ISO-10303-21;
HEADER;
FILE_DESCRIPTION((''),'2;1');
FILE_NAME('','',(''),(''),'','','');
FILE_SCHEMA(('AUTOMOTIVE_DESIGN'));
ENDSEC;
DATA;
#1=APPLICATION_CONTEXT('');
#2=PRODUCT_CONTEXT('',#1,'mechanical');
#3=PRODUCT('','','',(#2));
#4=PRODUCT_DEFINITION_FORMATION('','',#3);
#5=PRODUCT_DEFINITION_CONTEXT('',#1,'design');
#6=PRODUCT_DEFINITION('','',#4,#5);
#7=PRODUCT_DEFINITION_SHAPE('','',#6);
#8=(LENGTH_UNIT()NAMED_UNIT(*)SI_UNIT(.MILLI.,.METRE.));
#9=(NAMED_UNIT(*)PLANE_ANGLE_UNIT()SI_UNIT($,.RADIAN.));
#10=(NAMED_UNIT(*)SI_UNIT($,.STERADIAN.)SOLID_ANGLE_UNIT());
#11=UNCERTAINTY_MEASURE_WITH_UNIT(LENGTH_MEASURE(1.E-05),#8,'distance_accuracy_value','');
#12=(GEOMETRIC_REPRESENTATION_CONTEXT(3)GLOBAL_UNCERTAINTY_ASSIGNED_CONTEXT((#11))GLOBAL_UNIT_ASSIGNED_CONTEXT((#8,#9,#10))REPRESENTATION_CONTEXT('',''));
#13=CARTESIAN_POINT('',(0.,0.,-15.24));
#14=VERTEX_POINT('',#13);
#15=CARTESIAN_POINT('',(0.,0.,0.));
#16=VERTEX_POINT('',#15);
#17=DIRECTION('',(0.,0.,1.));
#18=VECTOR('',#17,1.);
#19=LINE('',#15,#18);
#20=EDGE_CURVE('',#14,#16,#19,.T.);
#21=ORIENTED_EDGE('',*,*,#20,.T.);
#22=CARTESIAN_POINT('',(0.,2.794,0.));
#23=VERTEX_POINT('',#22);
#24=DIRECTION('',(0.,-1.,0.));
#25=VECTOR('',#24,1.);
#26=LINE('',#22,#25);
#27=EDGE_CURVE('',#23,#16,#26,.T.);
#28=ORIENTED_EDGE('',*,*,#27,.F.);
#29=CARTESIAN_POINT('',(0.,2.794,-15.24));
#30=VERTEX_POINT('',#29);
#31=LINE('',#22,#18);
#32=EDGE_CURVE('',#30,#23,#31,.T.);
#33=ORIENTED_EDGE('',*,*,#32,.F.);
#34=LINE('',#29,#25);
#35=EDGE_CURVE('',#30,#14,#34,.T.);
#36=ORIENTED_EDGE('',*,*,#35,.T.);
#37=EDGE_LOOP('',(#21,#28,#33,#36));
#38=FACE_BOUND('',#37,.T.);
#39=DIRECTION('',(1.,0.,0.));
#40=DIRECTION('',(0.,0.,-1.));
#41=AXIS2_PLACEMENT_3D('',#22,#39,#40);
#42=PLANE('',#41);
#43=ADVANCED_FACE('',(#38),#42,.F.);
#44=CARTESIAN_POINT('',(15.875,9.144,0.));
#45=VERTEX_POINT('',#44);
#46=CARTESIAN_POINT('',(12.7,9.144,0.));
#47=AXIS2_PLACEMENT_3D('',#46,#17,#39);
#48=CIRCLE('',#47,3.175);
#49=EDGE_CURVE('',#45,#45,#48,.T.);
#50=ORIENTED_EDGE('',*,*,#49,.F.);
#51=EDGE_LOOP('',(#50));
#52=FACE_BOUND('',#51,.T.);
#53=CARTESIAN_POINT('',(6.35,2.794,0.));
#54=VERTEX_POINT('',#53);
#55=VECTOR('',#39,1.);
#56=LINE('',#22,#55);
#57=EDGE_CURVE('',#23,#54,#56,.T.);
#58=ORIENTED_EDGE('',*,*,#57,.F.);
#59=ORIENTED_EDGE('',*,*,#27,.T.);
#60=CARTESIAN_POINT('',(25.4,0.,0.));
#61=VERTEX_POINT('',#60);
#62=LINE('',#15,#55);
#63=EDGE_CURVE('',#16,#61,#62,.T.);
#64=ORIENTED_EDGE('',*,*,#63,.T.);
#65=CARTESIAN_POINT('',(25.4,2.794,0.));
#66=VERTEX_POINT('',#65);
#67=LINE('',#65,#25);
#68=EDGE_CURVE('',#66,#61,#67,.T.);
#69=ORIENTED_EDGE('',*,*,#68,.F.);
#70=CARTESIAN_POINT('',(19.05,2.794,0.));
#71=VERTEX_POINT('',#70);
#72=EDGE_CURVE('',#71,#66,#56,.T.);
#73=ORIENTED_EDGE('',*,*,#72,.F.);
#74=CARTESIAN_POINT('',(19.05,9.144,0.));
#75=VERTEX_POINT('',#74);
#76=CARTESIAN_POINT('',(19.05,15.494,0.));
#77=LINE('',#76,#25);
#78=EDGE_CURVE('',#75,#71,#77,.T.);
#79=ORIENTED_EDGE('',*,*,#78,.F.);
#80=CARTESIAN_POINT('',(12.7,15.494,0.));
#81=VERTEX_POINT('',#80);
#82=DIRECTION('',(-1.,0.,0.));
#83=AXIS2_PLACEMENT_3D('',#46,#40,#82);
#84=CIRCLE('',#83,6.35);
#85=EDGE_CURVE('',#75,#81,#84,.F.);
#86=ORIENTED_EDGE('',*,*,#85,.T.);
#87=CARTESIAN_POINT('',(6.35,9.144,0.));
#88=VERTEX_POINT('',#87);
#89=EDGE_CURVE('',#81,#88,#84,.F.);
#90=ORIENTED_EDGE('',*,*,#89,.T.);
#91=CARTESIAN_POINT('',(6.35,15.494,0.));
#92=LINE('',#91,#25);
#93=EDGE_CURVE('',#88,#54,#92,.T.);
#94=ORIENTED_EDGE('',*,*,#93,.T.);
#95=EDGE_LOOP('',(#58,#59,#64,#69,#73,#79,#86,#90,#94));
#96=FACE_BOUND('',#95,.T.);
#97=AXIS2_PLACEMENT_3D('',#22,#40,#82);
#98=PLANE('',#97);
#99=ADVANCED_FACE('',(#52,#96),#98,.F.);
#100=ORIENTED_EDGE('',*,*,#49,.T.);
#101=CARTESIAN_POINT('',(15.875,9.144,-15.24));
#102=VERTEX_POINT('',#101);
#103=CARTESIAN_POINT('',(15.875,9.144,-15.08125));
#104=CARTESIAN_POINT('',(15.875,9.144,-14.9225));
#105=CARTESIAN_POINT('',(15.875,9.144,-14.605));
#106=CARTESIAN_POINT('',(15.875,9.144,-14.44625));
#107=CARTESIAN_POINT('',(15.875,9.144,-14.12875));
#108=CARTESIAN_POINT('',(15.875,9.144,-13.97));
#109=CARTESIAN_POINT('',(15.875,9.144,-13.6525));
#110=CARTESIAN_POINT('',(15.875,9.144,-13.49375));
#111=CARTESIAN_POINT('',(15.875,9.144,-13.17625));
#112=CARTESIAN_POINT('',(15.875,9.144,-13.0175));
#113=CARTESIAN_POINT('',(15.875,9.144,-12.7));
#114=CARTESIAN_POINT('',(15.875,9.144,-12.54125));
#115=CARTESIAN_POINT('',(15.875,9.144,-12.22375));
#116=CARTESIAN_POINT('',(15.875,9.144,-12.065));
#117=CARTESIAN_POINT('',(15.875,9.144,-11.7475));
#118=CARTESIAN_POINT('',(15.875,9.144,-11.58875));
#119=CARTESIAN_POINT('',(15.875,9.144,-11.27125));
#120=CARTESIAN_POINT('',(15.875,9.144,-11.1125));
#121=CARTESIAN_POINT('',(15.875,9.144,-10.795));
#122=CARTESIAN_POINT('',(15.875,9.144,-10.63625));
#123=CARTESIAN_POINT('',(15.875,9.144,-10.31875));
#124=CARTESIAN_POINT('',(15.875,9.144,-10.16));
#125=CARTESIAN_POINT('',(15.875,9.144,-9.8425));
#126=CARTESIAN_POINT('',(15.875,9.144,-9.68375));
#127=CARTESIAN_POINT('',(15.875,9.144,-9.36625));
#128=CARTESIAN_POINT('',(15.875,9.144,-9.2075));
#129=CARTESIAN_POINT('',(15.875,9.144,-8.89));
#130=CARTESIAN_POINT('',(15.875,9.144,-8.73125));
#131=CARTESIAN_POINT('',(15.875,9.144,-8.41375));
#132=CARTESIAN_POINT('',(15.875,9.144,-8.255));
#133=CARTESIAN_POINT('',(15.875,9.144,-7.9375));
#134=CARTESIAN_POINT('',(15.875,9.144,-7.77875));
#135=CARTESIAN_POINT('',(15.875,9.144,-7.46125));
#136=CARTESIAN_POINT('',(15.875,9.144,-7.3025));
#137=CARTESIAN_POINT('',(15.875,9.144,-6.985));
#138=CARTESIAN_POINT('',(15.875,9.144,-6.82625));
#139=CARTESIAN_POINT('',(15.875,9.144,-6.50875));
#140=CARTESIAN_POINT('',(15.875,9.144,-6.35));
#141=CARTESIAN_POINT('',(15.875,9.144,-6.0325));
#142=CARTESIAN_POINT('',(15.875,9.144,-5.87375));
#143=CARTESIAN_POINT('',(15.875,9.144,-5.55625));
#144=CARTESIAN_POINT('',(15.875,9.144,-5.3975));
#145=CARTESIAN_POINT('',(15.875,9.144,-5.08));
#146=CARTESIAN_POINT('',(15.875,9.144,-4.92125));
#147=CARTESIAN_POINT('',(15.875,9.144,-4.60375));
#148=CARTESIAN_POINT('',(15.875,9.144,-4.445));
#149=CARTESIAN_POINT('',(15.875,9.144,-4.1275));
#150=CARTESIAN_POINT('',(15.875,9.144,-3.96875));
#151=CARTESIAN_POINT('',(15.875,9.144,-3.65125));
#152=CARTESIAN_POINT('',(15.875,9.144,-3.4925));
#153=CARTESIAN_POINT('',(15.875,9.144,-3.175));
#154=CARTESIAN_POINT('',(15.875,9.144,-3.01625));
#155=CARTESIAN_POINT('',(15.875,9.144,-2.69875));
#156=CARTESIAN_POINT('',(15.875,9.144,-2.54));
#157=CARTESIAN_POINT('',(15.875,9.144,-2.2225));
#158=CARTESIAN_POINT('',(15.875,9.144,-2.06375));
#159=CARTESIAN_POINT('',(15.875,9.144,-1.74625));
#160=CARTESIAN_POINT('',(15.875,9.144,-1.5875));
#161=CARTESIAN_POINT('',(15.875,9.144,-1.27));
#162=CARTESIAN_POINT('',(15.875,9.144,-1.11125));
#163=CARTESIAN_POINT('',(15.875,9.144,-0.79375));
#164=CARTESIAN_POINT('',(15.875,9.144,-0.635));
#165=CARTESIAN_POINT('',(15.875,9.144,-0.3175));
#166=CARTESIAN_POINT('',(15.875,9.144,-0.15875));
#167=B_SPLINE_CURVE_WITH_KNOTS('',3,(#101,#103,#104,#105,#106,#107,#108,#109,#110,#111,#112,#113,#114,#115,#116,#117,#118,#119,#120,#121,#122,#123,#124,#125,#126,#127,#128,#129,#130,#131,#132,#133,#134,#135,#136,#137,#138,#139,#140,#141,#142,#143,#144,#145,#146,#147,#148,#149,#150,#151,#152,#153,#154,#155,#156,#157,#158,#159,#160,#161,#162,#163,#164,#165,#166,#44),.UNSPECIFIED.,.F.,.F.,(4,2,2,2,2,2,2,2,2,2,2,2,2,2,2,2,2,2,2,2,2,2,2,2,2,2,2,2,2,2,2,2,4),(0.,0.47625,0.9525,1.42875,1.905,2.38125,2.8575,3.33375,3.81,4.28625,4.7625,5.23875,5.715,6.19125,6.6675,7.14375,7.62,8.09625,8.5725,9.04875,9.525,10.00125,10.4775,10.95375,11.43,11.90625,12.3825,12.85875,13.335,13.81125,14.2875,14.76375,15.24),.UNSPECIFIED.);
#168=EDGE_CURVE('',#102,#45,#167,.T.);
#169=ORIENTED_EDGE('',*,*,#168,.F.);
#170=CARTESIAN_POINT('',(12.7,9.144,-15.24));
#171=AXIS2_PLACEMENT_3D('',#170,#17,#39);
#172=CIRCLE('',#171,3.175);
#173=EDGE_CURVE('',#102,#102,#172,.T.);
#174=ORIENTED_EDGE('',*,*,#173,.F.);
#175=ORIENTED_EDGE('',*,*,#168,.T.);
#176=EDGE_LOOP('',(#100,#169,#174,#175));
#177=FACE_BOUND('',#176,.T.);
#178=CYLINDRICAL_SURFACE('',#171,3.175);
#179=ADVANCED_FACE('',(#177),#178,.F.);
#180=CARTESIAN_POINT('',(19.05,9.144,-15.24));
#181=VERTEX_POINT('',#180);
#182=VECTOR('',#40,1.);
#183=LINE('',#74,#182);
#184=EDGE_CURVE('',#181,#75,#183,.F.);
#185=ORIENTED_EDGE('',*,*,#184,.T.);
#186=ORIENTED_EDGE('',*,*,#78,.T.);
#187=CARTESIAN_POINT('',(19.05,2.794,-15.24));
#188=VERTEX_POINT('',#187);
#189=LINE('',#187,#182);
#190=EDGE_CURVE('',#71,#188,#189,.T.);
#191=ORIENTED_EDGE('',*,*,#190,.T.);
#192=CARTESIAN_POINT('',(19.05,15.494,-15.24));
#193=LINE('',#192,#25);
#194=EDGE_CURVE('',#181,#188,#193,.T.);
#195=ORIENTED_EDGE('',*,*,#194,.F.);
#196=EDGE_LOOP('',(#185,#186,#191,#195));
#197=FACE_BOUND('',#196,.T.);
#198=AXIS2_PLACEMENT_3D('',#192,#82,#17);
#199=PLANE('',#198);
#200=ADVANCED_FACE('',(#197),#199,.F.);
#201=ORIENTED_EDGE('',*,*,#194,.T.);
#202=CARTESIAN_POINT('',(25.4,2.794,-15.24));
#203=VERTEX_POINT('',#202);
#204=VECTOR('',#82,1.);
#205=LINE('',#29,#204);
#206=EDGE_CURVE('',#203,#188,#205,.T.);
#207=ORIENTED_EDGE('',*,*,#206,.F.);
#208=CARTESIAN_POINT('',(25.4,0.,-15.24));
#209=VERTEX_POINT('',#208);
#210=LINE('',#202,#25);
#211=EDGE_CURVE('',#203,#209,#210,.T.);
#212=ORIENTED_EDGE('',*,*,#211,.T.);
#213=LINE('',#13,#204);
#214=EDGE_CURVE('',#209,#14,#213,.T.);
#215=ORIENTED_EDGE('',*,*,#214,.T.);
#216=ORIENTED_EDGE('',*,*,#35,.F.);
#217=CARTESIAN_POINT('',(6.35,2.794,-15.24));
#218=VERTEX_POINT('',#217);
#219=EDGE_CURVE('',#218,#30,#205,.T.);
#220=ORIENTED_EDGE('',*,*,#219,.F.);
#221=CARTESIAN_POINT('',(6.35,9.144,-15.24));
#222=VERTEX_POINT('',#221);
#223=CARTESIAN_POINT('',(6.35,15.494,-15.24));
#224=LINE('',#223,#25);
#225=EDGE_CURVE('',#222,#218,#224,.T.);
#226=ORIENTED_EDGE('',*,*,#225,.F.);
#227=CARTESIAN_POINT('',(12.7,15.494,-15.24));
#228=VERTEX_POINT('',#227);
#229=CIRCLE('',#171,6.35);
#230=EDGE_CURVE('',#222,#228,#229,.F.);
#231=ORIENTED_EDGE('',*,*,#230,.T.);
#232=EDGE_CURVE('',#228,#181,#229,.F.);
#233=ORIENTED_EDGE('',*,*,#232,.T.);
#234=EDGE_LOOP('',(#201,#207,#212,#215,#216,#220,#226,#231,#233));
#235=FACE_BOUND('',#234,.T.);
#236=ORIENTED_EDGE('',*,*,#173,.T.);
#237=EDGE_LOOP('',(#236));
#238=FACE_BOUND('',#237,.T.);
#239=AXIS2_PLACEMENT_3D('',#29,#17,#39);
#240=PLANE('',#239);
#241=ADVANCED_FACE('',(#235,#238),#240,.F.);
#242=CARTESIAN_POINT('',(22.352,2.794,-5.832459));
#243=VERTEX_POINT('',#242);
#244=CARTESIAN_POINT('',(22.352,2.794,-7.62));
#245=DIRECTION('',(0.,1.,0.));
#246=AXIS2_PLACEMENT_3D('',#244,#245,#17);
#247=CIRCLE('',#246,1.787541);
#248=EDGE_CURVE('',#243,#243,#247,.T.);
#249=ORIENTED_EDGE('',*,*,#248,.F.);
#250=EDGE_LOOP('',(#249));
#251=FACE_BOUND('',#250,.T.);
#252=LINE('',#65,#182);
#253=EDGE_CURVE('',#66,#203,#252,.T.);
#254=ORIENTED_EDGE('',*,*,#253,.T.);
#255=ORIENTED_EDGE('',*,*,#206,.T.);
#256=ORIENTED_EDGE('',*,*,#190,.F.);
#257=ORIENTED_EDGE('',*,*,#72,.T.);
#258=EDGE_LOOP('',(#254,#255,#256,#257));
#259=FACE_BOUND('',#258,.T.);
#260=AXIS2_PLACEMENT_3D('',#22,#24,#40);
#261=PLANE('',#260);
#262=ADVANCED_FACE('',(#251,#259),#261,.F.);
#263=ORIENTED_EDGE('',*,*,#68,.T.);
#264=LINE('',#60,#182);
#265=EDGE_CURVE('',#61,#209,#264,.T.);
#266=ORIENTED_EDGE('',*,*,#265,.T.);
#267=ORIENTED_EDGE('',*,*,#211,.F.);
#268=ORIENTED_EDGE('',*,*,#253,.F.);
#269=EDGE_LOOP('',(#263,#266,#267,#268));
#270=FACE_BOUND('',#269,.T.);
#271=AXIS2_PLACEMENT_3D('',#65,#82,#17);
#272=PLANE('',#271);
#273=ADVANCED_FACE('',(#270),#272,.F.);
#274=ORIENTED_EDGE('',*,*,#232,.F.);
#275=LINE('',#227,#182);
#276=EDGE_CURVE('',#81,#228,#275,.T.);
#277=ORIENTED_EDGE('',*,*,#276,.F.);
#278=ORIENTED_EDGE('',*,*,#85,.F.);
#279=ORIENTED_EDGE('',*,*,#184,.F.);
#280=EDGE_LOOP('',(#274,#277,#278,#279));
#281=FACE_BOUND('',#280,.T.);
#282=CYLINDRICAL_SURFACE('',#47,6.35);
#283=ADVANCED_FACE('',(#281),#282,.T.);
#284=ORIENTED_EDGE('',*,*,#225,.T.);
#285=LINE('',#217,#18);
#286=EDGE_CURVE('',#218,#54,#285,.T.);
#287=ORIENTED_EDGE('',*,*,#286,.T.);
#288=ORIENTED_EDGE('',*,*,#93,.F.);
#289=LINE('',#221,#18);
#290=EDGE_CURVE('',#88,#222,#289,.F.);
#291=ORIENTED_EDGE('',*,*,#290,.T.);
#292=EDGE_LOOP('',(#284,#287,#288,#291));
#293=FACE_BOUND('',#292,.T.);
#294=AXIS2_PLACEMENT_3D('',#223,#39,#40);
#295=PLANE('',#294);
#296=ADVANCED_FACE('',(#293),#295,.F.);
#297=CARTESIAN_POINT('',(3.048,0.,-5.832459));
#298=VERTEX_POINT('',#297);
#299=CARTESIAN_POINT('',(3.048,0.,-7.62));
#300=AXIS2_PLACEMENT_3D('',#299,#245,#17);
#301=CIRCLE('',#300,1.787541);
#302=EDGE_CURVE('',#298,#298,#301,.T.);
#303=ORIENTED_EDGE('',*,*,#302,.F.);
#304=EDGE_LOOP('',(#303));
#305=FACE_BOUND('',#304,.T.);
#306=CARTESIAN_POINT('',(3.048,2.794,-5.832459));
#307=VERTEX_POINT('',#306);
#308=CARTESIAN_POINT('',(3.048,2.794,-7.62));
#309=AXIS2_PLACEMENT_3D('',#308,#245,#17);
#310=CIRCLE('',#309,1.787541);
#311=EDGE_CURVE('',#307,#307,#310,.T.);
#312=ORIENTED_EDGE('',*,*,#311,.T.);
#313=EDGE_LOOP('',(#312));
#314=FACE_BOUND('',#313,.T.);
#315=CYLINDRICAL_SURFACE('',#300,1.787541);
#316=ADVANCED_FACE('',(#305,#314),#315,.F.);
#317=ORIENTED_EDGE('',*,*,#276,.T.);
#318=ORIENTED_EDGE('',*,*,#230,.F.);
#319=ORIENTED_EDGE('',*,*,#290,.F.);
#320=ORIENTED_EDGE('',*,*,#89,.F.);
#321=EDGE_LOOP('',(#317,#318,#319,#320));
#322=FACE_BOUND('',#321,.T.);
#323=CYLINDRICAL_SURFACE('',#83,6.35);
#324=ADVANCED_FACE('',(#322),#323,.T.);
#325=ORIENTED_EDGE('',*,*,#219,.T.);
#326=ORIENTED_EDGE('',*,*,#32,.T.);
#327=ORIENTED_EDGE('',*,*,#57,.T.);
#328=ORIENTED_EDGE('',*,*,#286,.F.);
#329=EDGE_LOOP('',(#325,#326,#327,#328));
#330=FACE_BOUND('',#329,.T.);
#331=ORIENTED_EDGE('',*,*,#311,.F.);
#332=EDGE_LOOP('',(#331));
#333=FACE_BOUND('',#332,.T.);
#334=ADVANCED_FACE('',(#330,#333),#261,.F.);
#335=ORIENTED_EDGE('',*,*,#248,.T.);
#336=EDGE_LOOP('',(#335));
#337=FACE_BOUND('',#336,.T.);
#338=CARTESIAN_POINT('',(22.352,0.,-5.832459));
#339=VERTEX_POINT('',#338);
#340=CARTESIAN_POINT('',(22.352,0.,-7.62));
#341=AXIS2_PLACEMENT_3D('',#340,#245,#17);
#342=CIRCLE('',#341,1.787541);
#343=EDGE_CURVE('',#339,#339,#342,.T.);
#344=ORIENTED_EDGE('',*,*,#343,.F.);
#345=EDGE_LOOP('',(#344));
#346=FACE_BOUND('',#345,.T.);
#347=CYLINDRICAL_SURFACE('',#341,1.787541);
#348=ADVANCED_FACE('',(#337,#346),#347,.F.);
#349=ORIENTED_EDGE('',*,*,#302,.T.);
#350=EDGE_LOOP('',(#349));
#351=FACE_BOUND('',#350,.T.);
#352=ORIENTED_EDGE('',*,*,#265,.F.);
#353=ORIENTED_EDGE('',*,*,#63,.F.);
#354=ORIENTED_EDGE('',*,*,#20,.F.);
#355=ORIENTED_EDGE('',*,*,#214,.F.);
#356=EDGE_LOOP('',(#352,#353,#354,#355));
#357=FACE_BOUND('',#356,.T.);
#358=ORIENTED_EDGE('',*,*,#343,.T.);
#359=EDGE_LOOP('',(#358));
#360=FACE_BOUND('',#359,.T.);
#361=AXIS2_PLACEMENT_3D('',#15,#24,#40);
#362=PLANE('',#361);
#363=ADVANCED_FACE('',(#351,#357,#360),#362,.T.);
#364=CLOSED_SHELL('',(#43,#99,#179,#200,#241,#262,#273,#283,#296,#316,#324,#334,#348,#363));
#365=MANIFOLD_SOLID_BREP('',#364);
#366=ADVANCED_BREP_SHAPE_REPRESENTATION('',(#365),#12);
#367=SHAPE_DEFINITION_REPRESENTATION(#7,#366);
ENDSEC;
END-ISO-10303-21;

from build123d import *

# Parameters (mm, degrees)
SKETCH1_W           = 25.4
SKETCH1_H           = 15.24
BOSS_EXTRUDE1_DEPTH = 2.794
SKETCH2_W           = 12.7
SKETCH2_H           = 15.24
BOSS_EXTRUDE2_DEPTH = 12.7
FILLET1_R           = 6.35
SKETCH3_R           = 3.175
CUT_EXTRUDE1_DEPTH  = 34.428754628
SKETCH4_R           = 1.787540604
CUT_EXTRUDE2_DEPTH  = 33.228986953


with BuildPart() as part:
    # Sketch1 → Boss-Extrude1 (new body)
    with BuildSketch(Plane(origin=(0, 0, 0), x_dir=(1, 0, 0), z_dir=(0, 1, 0))):
        with Locations((12.7, 7.62)):
            Rectangle(SKETCH1_W, SKETCH1_H)
    extrude(amount=BOSS_EXTRUDE1_DEPTH)

    # Sketch2 → Boss-Extrude2 (add)
    with BuildSketch(Plane(origin=(0, 2.794, 0), x_dir=(1, 0, 0), z_dir=(0, 1, 0))):
        with Locations((12.7, 7.62)):
            Rectangle(SKETCH2_W, SKETCH2_H)
    extrude(amount=BOSS_EXTRUDE2_DEPTH)

    # Fillet1
    fillet1_edges = [part.edges().sort_by_distance(p)[0] for p in [
        (6.35, 15.494, -7.62),
        (19.05, 15.494, -7.62),
    ]]
    fillet(fillet1_edges, radius=FILLET1_R - 0.0001)  # a hair under: the kernel refuses the full size

    # Sketch3 → Cut-Extrude1 (cut, through all)
    with BuildSketch(Plane.XY):
        with Locations((12.7, 9.144)):
            Circle(SKETCH3_R)
    extrude(amount=-CUT_EXTRUDE1_DEPTH, mode=Mode.SUBTRACT)

    # Sketch4 → Cut-Extrude2 (cut, through all)
    with BuildSketch(Plane(origin=(0, 2.794, 0), x_dir=(1, 0, 0), z_dir=(0, 1, 0))):
        with Locations(Location((3.048, 7.62, 0), (0, 0, 270))):
            Circle(SKETCH4_R)
        with Locations(Location((22.352, 7.62, 0), (0, 0, 270))):
            Circle(SKETCH4_R)
    extrude(amount=-CUT_EXTRUDE2_DEPTH, mode=Mode.SUBTRACT)


solid = part.part
